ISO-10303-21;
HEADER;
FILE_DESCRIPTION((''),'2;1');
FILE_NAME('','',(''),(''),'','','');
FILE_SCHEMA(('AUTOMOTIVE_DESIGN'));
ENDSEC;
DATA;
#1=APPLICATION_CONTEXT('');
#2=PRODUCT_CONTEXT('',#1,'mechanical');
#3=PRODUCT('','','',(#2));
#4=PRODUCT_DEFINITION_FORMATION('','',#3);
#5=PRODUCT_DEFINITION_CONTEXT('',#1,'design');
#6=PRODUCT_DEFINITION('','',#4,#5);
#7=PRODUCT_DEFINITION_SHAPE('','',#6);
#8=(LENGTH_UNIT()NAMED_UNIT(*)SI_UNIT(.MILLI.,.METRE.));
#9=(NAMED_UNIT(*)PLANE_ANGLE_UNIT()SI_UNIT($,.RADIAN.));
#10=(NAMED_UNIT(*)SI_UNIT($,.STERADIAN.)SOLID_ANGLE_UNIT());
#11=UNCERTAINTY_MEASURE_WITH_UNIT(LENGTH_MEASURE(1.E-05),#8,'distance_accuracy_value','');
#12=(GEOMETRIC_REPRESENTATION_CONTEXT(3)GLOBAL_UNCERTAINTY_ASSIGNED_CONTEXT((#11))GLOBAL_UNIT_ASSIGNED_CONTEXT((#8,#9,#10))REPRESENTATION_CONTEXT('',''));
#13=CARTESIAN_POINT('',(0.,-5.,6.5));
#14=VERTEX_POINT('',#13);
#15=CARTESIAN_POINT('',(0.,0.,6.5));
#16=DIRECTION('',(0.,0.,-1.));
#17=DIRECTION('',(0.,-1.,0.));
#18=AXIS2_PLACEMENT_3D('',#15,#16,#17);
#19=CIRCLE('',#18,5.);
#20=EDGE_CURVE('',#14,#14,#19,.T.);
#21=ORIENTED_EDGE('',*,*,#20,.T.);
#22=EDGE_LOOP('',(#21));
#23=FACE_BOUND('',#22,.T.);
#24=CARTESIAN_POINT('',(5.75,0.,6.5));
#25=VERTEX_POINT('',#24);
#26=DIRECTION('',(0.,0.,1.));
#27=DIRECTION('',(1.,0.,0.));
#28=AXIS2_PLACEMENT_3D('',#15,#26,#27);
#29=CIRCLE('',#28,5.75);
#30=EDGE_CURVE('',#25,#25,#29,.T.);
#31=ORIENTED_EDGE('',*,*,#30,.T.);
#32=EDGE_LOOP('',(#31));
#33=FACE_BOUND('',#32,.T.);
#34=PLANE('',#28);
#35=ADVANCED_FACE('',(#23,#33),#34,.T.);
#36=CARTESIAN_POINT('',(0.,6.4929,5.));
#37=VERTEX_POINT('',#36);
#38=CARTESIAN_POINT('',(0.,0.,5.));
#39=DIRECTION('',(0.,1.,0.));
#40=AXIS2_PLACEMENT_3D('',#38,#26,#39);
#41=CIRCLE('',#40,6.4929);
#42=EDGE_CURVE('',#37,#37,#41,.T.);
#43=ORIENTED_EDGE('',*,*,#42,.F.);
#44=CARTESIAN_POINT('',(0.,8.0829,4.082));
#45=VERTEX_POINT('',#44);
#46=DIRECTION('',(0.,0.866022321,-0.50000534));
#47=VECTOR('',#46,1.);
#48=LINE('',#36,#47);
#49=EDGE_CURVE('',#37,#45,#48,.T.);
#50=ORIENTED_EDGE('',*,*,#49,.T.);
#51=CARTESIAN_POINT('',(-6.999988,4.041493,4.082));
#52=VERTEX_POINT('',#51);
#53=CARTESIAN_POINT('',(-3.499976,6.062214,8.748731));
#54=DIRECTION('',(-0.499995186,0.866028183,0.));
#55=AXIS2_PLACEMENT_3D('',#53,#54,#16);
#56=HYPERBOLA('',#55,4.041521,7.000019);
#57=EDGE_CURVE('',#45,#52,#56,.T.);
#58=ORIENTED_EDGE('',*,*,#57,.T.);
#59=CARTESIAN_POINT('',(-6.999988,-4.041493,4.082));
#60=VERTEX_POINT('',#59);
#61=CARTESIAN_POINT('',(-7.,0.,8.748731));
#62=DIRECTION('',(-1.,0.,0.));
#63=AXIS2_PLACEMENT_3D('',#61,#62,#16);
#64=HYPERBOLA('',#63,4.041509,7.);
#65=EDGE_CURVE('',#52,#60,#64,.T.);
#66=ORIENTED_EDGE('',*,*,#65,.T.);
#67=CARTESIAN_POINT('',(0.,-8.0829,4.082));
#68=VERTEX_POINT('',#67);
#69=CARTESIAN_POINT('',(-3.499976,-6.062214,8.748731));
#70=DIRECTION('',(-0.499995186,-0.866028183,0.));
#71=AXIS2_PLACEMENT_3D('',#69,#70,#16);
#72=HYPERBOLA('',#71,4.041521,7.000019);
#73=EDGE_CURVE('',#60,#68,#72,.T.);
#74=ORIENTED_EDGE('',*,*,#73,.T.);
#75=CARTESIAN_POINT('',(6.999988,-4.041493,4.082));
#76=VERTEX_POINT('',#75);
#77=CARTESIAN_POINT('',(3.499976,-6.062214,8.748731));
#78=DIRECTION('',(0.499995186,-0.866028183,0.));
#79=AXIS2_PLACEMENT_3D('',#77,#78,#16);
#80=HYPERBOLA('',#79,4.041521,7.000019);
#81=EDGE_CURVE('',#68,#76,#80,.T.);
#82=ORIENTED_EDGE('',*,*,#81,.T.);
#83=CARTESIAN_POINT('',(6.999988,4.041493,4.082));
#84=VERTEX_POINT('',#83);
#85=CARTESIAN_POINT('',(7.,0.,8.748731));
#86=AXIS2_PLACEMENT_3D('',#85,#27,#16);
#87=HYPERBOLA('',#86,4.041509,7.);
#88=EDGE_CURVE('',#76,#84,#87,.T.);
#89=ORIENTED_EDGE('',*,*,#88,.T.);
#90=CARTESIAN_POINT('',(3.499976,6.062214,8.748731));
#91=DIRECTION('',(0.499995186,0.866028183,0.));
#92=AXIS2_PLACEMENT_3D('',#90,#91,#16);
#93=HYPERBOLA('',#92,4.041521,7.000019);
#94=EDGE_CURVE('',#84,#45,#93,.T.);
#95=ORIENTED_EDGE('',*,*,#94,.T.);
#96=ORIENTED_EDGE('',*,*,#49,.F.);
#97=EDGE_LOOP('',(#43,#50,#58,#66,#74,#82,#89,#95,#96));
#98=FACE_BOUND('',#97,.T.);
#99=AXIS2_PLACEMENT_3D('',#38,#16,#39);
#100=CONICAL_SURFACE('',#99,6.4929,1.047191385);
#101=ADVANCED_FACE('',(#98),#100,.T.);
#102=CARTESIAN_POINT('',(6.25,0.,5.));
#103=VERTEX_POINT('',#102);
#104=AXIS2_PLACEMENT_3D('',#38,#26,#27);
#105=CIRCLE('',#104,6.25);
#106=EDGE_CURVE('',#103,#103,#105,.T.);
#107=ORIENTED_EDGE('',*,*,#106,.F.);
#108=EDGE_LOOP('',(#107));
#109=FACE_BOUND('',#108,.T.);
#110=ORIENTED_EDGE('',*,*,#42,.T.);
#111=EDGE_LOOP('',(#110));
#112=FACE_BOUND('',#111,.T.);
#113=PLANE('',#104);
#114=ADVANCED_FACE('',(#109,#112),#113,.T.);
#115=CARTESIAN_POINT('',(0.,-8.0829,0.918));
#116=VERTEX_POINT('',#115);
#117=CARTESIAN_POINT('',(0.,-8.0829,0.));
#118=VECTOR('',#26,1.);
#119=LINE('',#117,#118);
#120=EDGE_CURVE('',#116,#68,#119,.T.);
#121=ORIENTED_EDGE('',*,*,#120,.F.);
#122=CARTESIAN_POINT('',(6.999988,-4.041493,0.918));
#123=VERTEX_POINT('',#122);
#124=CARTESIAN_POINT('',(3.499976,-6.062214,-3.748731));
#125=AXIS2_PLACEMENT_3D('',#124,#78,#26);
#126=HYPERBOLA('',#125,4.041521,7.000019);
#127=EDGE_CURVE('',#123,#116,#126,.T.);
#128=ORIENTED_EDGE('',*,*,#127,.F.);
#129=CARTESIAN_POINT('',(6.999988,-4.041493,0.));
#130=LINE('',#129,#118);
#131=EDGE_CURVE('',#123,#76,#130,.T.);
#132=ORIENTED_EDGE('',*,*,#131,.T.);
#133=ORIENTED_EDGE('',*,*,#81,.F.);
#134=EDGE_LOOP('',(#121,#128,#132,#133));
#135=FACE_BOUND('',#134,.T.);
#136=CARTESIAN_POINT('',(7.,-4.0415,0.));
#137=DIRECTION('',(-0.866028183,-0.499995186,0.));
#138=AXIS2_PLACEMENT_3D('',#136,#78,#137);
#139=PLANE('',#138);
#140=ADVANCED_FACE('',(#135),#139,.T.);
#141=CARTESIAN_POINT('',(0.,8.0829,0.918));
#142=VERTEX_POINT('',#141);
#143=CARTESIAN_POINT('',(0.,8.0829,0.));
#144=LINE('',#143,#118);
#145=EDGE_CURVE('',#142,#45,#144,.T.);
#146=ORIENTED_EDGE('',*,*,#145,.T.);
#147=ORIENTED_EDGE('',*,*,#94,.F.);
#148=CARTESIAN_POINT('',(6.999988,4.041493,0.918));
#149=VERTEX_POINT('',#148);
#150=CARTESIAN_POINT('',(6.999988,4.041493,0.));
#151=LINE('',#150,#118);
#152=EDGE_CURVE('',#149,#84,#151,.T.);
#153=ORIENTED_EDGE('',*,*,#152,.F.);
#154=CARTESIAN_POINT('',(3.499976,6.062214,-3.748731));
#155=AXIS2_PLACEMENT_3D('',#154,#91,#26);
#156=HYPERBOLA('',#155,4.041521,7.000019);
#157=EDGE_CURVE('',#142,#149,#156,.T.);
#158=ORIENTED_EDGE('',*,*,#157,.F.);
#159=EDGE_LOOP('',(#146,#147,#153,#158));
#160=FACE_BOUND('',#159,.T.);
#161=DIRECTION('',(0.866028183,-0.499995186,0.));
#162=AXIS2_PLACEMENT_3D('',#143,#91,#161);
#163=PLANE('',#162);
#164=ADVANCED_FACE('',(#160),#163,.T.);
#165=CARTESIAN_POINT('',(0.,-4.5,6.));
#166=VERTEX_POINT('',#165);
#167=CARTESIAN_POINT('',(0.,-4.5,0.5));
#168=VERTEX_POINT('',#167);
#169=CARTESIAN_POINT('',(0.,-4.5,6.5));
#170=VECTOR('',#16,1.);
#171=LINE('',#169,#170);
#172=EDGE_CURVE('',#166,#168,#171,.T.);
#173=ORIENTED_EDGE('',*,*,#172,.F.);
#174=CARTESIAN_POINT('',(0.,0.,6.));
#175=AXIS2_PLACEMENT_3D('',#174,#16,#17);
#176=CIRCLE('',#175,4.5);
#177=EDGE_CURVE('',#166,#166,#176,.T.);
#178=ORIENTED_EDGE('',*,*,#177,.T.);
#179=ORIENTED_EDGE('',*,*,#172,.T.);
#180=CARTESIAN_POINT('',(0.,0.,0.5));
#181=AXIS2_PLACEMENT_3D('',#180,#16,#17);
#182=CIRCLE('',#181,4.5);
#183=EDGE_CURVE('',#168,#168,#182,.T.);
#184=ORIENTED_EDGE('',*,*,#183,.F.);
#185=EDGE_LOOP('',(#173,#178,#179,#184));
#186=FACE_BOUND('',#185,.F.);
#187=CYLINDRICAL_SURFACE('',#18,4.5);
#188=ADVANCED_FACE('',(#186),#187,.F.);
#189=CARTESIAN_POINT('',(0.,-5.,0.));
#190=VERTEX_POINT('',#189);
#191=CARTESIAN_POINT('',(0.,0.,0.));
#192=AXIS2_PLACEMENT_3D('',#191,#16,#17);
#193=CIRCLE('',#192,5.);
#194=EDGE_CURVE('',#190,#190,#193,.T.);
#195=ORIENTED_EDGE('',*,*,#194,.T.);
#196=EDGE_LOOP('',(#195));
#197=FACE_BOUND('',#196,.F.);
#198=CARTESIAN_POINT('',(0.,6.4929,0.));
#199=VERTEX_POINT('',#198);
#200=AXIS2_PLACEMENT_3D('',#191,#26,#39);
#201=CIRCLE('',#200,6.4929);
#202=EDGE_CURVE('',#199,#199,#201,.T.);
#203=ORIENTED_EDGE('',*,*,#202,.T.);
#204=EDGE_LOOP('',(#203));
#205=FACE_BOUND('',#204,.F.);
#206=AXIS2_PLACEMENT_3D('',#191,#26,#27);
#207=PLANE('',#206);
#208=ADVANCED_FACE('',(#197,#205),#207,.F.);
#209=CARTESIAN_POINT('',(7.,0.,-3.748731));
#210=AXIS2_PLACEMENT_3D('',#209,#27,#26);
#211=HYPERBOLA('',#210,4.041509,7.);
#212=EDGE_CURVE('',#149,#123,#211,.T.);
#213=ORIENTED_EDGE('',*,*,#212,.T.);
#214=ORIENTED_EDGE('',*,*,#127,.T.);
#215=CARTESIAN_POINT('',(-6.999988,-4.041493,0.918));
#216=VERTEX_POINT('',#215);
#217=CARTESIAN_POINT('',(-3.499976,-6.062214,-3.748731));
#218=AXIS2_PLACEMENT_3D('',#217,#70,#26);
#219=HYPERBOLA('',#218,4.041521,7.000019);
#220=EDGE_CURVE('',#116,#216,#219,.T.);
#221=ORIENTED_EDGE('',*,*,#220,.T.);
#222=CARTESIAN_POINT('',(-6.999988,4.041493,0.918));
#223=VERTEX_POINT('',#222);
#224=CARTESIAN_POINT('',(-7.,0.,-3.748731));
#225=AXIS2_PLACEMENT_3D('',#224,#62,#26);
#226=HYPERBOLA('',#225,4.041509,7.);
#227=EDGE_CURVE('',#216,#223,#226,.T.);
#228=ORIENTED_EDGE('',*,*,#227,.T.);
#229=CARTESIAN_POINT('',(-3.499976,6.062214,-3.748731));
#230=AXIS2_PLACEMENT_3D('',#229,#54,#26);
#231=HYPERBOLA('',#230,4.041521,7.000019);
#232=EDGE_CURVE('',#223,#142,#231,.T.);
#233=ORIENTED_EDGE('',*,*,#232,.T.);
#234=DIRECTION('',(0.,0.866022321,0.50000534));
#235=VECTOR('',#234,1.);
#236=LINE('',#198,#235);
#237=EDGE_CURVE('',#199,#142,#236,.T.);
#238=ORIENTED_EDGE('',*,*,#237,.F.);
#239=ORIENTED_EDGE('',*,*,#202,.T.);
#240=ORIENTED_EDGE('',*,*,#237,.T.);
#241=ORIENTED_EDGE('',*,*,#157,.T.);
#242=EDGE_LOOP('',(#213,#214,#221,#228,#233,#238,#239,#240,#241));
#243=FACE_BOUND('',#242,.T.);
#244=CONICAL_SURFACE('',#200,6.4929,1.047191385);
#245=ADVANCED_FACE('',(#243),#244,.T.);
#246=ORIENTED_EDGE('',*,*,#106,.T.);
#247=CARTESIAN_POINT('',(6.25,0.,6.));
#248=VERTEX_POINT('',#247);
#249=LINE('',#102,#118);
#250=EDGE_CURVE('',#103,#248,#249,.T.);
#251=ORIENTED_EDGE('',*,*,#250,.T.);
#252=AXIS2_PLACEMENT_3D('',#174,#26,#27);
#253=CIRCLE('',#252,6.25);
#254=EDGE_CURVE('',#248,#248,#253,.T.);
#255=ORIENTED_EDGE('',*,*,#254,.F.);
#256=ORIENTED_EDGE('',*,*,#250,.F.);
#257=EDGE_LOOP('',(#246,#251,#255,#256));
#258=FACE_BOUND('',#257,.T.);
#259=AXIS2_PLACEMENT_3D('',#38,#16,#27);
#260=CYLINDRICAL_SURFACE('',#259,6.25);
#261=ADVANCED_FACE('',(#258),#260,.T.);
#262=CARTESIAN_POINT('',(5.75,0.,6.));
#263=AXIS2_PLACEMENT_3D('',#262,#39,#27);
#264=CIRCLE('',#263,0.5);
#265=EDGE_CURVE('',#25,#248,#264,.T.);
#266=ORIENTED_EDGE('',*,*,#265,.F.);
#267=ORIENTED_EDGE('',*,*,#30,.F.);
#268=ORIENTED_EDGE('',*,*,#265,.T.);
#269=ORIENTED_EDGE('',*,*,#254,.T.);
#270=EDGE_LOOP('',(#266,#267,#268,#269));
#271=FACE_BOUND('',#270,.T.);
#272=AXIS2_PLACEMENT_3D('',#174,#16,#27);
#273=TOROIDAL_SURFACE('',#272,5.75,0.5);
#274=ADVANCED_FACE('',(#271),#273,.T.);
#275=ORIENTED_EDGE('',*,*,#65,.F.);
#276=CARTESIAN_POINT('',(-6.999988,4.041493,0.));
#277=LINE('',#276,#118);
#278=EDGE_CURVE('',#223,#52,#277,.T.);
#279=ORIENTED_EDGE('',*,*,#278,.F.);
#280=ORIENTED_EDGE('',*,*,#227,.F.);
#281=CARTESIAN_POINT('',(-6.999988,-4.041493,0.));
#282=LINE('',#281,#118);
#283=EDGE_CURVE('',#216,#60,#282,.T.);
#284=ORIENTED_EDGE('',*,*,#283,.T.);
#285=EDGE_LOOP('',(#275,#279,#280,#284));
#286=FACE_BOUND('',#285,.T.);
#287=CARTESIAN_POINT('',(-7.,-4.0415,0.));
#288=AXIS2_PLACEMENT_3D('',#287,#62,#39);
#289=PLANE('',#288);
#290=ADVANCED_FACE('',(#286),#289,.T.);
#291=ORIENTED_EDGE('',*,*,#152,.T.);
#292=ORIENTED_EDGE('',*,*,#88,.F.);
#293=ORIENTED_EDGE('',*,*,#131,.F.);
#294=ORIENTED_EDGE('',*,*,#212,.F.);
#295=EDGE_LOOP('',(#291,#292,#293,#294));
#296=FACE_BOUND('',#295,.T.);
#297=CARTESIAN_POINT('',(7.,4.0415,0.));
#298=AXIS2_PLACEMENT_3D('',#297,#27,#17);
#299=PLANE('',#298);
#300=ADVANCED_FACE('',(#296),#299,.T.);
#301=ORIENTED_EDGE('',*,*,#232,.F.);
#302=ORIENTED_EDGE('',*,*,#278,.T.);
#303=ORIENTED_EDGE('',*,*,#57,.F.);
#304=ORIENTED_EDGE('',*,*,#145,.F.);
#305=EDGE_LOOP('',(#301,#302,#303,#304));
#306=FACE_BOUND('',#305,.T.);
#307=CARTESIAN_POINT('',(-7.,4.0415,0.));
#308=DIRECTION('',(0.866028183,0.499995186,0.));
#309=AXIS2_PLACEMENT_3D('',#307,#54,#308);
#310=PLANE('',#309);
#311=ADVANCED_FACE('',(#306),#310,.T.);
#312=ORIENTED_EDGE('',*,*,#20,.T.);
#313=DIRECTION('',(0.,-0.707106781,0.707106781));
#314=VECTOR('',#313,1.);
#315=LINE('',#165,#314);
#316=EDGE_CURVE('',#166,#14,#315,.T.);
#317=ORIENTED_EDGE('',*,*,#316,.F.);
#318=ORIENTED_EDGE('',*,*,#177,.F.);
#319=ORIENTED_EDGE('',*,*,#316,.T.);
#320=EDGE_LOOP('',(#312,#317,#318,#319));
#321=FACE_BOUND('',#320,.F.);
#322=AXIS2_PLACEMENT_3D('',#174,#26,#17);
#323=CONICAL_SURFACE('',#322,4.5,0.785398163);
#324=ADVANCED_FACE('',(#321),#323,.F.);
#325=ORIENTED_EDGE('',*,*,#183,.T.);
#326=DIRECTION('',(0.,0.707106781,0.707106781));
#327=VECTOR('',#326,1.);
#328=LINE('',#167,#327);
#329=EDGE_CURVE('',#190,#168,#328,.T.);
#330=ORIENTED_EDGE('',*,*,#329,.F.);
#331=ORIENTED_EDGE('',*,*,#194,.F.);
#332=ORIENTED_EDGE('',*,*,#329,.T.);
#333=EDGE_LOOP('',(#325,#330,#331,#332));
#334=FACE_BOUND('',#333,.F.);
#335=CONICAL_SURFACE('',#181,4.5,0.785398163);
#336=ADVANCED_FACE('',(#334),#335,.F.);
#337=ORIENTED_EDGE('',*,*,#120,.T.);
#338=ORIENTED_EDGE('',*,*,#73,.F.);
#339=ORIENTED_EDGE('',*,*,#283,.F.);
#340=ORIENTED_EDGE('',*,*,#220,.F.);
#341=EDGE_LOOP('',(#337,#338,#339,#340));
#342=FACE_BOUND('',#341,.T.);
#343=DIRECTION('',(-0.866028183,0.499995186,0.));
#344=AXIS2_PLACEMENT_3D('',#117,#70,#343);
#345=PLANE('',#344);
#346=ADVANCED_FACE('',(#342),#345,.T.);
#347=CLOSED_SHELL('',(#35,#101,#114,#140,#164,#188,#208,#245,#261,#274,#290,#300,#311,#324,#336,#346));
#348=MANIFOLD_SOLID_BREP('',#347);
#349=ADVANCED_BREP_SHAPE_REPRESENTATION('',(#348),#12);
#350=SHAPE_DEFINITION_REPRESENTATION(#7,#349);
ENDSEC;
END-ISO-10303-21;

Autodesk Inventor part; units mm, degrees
ref_plane "YZ Plane" through (0, 0, 0) normal (1, 0, 0) x (0, 1, 0)
ref_plane "XZ Plane" through (0, 0, 0) normal (0, 1, 0) x (-1, 0, 0)
sketch "Schizzo1" plane through (0, 0, 0) normal (0, 0, 1) x (1, 0, 0)
  line L0 (0, 8.0829) -> (7, 4.0415)
  line L1 (7, 4.0415) -> (7, -4.0415)
  line L2 (7, -4.0415) -> (0, -8.0829)
  line L3 (0, -8.0829) -> (-7, -4.0415)
  line L4 (-7, -4.0415) -> (-7, 4.0415)
  line L5 (-7, 4.0415) -> (0, 8.0829)
  point P0 (0, 0)
  point P1 (0, 0)
  dimension "d0" = 14
extrude "Estrusione1" add sketch "Schizzo1" along normal blind 5
sketch "Schizzo2" plane through (0, 0, 5) normal (0, 0, 1) x (1, 0, 0)
  circle A0 centre (0, 0) radius 6.25
  dimension "d5" = 12.5
extrude "Estrusione2" add sketch "Schizzo2" along normal blind 1.5
sketch "Schizzo3" plane through (0, 0, 0) normal (1, 0, 0) x (0, 1, 0)
  line L0 (8.0829, 5) -> (4.0415, 5) projected
  line L1 (4.0415, 0) -> (4.0415, 5) projected
  line L2 (8.0829, 0) -> (4.0415, 0) projected
  line L3 (8.0829, 0) -> (8.0829, 5) projected
  line L4 (6.4929, 0) -> (8.0829, 0.918)
  line L5 (0, -0.8) -> (0, 4.8) projected
  line L6 (6.4929, 5) -> (8.0829, 4.082)
  line L7 (6.4929, 5) -> (8.0829, 5)
  line L8 (8.0829, 4.082) -> (8.0829, 5)
  point P0 (0, 0)
  dimension "d6" = 30
ref_plane "Piano di lavoro1" through (0, 0, 2) normal (0, 0, -1) x (-1, 0, 0)
sketch "Schizzo4" plane through (0, 0, 6.5) normal (0, 0, 1) x (1, 0, 0)
  circle A0 centre (0, 0) radius 6.25 projected
hole "Foro1" at (0, 0, 6.5) direction (0, 0, -1) diameter 9 end through all
thread "Filettatura1" size "M9x1.25" class "6H" standard "ANSI Metric M Profile" full length
chamfer "Smusso1" distance 0.5 angle 45 2 edges at (0, 4.5, 6.5) (0, 4.5, 0)
revolve "Rivoluzione2" cut sketch "Schizzo3" angle 360 about axis through (0, 0, -10) along (0, 0, 1) contours L3 L6 L0 | L3 L2 L4
fillet "Raccordo1" radius 0.5 1 edges at (-6.25, 0, 6.5)
properties part number "Dado 14"
